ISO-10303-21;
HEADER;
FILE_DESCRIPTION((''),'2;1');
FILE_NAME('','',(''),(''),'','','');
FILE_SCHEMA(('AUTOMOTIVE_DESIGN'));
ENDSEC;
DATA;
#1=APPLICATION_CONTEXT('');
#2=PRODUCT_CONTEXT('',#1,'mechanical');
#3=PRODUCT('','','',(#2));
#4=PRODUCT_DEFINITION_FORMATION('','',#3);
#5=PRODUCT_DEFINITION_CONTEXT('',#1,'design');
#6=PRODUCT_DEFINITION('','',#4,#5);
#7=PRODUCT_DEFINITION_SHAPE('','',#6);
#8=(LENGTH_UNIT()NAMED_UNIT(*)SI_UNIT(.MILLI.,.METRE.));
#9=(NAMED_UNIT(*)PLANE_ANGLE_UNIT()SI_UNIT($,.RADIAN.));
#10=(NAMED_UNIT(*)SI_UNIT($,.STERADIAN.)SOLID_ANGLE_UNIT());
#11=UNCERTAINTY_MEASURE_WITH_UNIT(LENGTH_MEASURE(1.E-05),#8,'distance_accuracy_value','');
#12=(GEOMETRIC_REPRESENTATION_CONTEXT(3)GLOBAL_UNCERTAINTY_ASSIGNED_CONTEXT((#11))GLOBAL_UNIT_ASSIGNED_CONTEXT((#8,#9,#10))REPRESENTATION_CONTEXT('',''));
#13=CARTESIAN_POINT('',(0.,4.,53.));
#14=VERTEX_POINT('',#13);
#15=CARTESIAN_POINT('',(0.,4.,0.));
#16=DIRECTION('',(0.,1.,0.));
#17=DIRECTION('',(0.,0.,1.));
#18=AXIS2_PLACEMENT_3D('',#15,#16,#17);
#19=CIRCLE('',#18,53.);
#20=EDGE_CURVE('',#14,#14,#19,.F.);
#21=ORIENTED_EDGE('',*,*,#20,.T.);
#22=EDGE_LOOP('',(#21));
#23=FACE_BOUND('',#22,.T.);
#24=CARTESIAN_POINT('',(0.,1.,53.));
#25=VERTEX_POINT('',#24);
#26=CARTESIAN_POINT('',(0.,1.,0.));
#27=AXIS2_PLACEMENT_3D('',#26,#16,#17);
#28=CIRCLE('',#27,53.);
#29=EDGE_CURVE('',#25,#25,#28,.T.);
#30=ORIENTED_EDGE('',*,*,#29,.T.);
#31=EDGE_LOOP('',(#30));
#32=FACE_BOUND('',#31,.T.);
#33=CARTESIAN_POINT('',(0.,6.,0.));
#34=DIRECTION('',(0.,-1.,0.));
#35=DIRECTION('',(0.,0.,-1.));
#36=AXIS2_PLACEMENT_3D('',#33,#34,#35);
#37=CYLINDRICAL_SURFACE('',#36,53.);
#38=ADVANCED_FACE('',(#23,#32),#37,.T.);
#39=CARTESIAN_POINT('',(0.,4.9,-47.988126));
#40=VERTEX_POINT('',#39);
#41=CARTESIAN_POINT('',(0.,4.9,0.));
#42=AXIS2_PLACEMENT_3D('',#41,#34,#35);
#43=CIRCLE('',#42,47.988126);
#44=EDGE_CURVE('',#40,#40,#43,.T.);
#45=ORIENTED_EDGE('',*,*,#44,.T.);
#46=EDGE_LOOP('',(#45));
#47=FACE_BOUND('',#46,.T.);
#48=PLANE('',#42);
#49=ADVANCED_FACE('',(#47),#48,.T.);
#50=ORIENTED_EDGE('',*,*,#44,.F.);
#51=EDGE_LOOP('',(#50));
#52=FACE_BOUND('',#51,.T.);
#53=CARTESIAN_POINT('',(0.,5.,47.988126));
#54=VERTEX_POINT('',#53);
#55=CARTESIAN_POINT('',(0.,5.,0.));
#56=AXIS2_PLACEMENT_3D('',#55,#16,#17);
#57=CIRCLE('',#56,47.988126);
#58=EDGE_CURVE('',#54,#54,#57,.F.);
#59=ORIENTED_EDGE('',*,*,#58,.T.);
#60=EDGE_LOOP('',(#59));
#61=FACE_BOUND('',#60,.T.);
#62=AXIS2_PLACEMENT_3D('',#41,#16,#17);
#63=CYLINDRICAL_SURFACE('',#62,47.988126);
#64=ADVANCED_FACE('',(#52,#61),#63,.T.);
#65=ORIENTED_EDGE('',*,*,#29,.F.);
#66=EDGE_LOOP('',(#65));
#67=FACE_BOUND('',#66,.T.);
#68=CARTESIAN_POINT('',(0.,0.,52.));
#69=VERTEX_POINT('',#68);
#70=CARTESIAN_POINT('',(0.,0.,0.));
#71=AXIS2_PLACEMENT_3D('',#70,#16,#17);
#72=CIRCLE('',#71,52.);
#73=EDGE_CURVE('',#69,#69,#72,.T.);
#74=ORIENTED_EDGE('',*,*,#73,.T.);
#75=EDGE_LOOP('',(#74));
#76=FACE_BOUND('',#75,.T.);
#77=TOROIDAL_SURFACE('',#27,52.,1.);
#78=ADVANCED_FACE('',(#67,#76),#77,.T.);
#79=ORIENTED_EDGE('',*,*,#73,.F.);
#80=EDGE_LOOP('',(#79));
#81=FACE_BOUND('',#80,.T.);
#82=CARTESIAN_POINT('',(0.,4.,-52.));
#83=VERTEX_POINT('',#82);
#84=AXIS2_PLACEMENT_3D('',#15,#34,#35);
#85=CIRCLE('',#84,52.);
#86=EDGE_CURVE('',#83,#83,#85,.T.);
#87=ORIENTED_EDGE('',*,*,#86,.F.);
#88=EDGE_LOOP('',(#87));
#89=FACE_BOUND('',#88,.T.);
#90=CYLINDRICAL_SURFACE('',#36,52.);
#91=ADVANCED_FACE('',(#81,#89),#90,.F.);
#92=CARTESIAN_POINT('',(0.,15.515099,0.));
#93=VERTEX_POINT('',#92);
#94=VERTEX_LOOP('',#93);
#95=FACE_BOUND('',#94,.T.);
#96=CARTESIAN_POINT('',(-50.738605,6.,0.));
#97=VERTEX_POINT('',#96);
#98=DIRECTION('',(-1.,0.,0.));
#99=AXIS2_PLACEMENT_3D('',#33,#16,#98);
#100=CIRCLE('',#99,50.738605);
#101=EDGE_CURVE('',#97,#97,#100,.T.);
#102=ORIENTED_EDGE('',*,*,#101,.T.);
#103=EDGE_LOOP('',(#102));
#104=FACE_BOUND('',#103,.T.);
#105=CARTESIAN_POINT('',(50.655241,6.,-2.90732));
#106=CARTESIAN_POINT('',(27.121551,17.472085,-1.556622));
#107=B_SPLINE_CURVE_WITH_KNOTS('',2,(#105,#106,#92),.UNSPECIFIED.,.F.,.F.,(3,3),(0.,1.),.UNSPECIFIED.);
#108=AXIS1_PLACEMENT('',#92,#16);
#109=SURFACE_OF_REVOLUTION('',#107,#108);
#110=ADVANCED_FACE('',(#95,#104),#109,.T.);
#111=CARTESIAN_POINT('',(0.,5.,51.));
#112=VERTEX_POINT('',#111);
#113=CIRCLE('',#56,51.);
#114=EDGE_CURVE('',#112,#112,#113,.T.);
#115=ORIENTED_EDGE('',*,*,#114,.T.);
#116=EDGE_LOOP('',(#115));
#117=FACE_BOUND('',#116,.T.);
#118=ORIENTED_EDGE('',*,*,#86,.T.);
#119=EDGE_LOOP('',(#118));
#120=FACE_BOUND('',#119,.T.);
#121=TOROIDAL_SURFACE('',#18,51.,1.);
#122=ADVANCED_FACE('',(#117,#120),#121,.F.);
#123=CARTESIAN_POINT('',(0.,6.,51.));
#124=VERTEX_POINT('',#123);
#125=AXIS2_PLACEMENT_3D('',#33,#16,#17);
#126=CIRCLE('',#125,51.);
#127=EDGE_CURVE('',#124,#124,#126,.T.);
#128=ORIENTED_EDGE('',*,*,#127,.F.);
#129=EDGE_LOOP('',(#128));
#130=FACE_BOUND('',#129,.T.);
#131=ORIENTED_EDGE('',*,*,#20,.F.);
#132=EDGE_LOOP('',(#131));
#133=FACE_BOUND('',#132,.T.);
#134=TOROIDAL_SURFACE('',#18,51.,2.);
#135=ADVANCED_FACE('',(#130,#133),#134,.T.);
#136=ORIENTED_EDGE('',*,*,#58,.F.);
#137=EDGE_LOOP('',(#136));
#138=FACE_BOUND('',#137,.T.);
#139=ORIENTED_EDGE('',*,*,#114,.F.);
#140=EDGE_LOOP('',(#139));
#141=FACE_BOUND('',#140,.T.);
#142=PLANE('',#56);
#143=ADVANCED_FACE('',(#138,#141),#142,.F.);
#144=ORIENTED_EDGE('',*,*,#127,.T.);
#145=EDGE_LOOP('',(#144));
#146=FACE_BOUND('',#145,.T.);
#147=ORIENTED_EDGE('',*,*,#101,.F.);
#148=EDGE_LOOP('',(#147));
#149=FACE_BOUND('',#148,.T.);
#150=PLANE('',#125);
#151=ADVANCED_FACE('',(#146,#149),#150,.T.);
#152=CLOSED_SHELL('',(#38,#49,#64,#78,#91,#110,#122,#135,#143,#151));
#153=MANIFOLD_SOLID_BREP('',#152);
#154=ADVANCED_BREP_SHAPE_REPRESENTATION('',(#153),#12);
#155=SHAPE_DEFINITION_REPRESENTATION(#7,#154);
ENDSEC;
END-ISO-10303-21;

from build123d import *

# Parameters (mm, degrees)
SKETCH_1_R      = 53
EXTRUDE_1_DEPTH = 6
FILLET_3_R      = 2
FILLET_4_R      = 1
SKETCH_6_R      = 47.988125992
EXTRUDE_2_DEPTH = 0.1


# Read off the part's stored shape, not the designer's step: 抽壳2
with BuildPart() as part:
    # 草图1 → 凸台-拉伸1 (new body)
    with BuildSketch(Plane(origin=(0, 0, 0), x_dir=(1, 0, 0), z_dir=(0, 1, 0))):
        with Locations(Location((0, 0, 0), (0, 0, 270))):
            Circle(SKETCH_1_R)
    extrude(amount=EXTRUDE_1_DEPTH)

    # 草图3 → 旋转1 (revolve)
    with BuildSketch(Plane(origin=(0, 0, 0), x_dir=(0.9983570071777269, 0, -0.05729996700812362), z_dir=(0.05729996700812362, 0, 0.9983570071777269))):
        with BuildLine():
            Line((0, 15.515098755), (0, 6))
            Line((0, 6), (50.738604569, 6))
            add(Edge.make_bspline(
                [(0, 15.515098755), (27.166184936, 17.472084947), (50.738604569, 6)],
                knots=[0, 0, 0, 1, 1, 1], degree=2))
        make_face()
    revolve(axis=Axis((0, 15.515098755, 0), (0, -1, 0)))

    # 圆角3
    fillet_3_edges = [part.edges().sort_by_distance(p)[0] for p in [
        (0, 6, -53),
    ]]
    fillet(fillet_3_edges, radius=FILLET_3_R)

    # 圆角4
    fillet_4_edges = [part.edges().sort_by_distance(p)[0] for p in [
        (0, 0, -53),
    ]]
    fillet(fillet_4_edges, radius=FILLET_4_R)

    # 抽壳2 outline → 抽壳2 (revolve, cut)
    with BuildSketch(Plane.XY):
        with BuildLine():
            Line((52, 0), (52, 4))
            ThreePointArc((52, 4), (51.707106781, 4.707106781), (51, 5))
            Line((51, 5), (0, 5))
            Line((0, 5), (0, 0))
            Line((0, 0), (52, 0))
        make_face()
    revolve(axis=Axis((0, 0, 0), (0, 1, 0)), mode=Mode.SUBTRACT)

    # 草图6 → 凸台-拉伸2 (add)
    with BuildSketch(Plane.XZ.offset(-5)):
        with Locations(Location((0, 0, 0), (0, 0, 90))):
            Circle(SKETCH_6_R)
    extrude(amount=EXTRUDE_2_DEPTH)


solid = part.part
